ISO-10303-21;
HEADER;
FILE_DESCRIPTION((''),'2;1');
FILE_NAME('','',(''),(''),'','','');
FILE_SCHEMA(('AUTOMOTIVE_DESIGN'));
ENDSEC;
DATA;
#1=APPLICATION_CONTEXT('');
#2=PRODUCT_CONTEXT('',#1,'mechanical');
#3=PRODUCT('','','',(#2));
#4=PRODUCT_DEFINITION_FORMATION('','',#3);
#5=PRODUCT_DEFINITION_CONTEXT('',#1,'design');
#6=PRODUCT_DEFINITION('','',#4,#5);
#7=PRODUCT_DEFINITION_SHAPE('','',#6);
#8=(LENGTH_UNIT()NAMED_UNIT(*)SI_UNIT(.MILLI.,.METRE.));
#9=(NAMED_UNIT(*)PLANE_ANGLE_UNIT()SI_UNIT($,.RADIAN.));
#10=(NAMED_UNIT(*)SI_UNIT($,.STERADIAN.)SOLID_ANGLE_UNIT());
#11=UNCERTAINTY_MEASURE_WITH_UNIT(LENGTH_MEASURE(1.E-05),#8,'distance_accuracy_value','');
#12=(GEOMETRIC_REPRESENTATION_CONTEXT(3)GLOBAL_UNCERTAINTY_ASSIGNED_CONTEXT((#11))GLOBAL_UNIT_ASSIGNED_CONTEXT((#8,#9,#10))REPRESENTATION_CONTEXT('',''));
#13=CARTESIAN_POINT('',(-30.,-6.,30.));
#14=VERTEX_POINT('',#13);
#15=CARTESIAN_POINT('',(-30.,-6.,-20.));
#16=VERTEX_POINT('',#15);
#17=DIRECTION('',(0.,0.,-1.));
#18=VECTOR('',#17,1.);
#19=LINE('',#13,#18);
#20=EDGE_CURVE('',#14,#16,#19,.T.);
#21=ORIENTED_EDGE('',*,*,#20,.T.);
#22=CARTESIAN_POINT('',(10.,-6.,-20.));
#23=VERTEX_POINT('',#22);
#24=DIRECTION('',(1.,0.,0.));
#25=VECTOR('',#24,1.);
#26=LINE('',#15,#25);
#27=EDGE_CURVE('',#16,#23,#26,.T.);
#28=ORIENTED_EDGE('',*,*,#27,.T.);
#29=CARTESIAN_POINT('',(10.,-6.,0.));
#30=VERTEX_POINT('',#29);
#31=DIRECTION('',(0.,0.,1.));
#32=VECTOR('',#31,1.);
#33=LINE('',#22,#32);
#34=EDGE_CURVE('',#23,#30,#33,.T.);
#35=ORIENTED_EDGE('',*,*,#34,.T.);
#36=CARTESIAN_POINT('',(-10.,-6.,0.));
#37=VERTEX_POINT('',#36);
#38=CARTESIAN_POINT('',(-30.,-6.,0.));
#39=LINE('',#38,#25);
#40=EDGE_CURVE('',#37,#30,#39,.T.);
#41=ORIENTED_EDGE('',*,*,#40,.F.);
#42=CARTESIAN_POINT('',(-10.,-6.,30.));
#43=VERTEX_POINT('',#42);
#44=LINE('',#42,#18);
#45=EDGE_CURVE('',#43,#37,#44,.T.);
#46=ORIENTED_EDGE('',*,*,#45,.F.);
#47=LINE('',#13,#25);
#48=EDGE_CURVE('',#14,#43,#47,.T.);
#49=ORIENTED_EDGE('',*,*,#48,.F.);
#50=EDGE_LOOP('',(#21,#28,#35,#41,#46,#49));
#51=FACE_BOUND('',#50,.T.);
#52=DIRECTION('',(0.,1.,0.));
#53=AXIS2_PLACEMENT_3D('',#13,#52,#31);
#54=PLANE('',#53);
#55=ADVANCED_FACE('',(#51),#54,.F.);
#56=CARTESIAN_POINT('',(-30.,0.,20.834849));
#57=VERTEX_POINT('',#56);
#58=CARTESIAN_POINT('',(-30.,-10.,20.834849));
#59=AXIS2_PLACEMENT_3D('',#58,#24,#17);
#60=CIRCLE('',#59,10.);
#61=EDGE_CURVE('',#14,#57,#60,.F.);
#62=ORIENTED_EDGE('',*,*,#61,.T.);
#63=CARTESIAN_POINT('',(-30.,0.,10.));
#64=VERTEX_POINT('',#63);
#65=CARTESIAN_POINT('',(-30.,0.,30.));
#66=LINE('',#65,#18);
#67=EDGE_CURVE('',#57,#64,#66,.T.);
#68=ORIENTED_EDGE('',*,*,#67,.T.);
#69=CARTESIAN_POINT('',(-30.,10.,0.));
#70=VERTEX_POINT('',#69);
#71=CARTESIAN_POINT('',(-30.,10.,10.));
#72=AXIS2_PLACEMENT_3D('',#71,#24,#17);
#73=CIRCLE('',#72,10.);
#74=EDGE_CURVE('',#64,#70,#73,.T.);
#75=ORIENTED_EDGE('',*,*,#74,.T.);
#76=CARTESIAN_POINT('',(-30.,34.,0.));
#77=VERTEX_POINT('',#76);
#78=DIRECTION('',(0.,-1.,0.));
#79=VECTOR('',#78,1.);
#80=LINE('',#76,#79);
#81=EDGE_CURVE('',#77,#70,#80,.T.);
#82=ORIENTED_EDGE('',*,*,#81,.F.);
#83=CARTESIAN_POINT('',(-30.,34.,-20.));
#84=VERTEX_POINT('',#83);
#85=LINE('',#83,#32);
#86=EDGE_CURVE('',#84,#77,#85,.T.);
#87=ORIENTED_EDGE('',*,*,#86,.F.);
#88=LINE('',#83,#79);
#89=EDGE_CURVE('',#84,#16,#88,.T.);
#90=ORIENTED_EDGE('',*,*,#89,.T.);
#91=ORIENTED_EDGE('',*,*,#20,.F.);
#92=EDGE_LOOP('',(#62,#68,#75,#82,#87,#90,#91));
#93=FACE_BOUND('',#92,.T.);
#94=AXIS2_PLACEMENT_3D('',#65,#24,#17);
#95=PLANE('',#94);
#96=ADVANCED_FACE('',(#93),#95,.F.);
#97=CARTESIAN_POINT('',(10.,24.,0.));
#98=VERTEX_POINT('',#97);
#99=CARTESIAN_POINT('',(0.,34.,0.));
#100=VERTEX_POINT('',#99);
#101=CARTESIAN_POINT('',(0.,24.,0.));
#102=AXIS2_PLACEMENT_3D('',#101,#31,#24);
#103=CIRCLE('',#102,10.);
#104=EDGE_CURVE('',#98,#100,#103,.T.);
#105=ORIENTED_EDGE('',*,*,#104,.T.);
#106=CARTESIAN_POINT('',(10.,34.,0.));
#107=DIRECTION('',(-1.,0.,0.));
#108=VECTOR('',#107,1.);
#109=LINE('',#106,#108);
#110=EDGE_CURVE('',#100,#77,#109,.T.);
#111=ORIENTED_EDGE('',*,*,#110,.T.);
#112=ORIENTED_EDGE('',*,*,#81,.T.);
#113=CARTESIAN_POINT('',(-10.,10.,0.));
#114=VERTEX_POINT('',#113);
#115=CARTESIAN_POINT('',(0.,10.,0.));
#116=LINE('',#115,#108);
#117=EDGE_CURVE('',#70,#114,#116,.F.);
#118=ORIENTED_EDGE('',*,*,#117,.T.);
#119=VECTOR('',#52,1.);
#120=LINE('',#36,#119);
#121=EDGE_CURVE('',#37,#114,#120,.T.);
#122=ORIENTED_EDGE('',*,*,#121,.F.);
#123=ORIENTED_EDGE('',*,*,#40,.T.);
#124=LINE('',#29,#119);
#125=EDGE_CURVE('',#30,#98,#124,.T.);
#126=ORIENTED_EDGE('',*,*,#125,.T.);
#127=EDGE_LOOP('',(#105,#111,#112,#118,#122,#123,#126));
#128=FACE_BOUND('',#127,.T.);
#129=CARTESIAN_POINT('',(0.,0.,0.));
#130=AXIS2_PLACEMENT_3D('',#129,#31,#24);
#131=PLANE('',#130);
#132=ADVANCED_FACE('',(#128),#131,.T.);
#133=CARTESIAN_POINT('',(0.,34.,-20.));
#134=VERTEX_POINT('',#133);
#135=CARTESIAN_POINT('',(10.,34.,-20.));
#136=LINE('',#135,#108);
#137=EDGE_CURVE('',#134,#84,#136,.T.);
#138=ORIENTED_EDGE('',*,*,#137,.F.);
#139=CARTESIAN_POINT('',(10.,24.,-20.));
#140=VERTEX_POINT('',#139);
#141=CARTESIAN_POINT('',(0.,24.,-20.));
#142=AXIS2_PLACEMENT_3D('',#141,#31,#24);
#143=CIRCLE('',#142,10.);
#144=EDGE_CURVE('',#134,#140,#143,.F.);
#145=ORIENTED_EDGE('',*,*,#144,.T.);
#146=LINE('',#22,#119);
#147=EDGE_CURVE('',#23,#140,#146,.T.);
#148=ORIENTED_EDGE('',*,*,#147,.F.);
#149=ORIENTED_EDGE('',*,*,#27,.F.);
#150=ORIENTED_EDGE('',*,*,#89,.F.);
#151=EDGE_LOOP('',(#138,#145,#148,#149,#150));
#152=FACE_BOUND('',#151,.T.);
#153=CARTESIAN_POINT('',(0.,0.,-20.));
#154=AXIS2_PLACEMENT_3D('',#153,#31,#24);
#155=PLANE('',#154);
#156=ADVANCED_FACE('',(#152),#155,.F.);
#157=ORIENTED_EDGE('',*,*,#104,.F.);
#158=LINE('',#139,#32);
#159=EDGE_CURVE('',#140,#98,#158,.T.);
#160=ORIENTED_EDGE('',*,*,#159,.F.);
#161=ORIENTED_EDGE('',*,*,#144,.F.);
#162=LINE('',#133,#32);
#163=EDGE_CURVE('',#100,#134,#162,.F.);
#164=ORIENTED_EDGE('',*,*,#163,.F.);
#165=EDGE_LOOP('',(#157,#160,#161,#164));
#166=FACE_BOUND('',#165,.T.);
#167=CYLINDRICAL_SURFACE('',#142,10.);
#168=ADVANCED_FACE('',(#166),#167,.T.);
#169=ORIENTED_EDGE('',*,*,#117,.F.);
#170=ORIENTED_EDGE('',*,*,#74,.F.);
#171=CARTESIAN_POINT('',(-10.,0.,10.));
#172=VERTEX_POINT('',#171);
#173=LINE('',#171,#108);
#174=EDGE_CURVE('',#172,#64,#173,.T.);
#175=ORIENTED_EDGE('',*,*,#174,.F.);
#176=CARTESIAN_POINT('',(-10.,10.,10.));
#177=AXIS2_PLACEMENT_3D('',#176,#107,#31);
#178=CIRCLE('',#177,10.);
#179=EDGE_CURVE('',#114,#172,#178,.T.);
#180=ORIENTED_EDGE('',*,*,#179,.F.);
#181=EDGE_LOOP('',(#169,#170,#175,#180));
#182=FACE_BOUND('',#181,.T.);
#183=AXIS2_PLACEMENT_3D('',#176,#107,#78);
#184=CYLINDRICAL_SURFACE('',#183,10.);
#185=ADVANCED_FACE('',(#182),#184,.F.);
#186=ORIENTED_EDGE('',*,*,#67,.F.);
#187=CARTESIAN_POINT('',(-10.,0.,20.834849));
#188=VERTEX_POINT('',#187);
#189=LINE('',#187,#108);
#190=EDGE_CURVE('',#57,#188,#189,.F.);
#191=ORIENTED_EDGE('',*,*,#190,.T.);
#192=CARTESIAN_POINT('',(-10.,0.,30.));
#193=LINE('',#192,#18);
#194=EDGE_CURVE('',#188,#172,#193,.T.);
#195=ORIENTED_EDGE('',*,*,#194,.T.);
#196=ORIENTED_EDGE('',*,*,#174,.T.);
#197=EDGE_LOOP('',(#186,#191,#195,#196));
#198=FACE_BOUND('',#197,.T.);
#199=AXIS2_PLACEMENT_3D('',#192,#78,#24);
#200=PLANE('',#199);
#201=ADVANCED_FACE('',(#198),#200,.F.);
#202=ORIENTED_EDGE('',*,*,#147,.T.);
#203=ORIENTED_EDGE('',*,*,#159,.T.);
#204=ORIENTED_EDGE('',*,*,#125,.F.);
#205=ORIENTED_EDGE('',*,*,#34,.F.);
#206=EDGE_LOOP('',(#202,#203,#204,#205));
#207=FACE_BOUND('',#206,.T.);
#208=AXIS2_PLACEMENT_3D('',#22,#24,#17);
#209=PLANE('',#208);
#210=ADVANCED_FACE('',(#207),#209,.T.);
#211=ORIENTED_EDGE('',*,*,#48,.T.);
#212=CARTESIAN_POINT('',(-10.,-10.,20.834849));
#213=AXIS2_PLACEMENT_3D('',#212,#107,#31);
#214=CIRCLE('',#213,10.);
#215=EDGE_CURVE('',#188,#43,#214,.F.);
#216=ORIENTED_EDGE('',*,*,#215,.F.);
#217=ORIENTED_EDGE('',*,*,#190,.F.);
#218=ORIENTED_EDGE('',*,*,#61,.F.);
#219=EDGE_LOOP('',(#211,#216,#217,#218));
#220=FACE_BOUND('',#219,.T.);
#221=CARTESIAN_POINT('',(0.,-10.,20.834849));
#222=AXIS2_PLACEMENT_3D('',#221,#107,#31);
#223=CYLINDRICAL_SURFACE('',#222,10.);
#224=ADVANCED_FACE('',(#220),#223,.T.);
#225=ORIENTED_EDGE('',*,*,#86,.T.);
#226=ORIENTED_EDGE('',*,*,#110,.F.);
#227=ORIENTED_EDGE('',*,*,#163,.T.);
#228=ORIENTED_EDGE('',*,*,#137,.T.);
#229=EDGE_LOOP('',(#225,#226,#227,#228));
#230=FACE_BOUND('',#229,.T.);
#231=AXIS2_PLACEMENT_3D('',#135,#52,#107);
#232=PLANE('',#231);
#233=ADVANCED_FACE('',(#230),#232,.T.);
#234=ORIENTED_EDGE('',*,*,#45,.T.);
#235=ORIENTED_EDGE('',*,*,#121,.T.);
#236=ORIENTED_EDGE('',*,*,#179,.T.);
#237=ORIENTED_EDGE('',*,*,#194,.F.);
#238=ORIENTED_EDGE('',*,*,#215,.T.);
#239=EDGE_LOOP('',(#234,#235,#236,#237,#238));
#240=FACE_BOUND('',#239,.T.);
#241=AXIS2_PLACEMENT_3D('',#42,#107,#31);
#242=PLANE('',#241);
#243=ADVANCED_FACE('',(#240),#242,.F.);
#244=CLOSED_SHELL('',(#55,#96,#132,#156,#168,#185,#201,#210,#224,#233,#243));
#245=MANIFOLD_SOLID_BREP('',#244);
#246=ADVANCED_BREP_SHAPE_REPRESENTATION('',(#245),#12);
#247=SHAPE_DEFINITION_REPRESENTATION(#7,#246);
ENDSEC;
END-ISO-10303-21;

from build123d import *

# Parameters (mm, degrees)
SKETCH1_W           = 20
SKETCH1_H           = 6
BOSS_EXTRUDE1_DEPTH = 30
SKETCH2_W           = 40
SKETCH2_H           = 40
BOSS_EXTRUDE2_DEPTH = 20
FILLET1_R           = 10


with BuildPart() as part:
    # Sketch1 → Boss-Extrude1 (new body)
    with BuildSketch(Plane.XY):
        with Locations((-20, -3)):
            Rectangle(SKETCH1_W, SKETCH1_H)
    extrude(amount=BOSS_EXTRUDE1_DEPTH)

    # Sketch2 → Boss-Extrude2 (add)
    with BuildSketch(Plane.XY):
        with Locations((-10, 14)):
            Rectangle(SKETCH2_W, SKETCH2_H)
    extrude(amount=-BOSS_EXTRUDE2_DEPTH)

    # Fillet1
    # the kernel refuses this fillet: 10 mm, written as the material it adds along each edge
    with BuildSketch(Plane(origin=(-10, 0, 0), x_dir=(0, 1, 0), z_dir=(-1, 0, 0))) as fillet1_piece_1:
        with BuildLine():
            CenterArc((FILLET1_R, -FILLET1_R), FILLET1_R, 90, 90)
            Line((0, -FILLET1_R), (0, 0))
            Line((0, 0), (FILLET1_R, 0))
        make_face()
    extrude(amount=20)
    # the kernel refuses this fillet: 10 mm, written as the material it takes off along each edge
    with BuildSketch(Plane(origin=(10, 34, 25), x_dir=(-1, 0, 0), z_dir=(0, 0, -1))) as fillet1_2_piece_1:
        with BuildLine():
            CenterArc((FILLET1_R, -FILLET1_R), FILLET1_R, 90, 90)
            Line((0, -FILLET1_R), (0, 0))
            Line((0, 0), (FILLET1_R, 0))
        make_face()
    extrude(amount=70, mode=Mode.SUBTRACT)
    with BuildSketch(Plane(origin=(12.912878475, 0, 30), x_dir=(0, 0, -1), z_dir=(-1, 0, 0))) as fillet1_2_piece_2:
        with BuildLine():
            CenterArc((9.16515139, 10), FILLET1_R, 203.578178478, 66.421821522)
            Line((0, 6), (0, 0))
            Line((0, 0), (9.16515139, 0))
        make_face()
    extrude(amount=65.82575695, mode=Mode.SUBTRACT)


solid = part.part
